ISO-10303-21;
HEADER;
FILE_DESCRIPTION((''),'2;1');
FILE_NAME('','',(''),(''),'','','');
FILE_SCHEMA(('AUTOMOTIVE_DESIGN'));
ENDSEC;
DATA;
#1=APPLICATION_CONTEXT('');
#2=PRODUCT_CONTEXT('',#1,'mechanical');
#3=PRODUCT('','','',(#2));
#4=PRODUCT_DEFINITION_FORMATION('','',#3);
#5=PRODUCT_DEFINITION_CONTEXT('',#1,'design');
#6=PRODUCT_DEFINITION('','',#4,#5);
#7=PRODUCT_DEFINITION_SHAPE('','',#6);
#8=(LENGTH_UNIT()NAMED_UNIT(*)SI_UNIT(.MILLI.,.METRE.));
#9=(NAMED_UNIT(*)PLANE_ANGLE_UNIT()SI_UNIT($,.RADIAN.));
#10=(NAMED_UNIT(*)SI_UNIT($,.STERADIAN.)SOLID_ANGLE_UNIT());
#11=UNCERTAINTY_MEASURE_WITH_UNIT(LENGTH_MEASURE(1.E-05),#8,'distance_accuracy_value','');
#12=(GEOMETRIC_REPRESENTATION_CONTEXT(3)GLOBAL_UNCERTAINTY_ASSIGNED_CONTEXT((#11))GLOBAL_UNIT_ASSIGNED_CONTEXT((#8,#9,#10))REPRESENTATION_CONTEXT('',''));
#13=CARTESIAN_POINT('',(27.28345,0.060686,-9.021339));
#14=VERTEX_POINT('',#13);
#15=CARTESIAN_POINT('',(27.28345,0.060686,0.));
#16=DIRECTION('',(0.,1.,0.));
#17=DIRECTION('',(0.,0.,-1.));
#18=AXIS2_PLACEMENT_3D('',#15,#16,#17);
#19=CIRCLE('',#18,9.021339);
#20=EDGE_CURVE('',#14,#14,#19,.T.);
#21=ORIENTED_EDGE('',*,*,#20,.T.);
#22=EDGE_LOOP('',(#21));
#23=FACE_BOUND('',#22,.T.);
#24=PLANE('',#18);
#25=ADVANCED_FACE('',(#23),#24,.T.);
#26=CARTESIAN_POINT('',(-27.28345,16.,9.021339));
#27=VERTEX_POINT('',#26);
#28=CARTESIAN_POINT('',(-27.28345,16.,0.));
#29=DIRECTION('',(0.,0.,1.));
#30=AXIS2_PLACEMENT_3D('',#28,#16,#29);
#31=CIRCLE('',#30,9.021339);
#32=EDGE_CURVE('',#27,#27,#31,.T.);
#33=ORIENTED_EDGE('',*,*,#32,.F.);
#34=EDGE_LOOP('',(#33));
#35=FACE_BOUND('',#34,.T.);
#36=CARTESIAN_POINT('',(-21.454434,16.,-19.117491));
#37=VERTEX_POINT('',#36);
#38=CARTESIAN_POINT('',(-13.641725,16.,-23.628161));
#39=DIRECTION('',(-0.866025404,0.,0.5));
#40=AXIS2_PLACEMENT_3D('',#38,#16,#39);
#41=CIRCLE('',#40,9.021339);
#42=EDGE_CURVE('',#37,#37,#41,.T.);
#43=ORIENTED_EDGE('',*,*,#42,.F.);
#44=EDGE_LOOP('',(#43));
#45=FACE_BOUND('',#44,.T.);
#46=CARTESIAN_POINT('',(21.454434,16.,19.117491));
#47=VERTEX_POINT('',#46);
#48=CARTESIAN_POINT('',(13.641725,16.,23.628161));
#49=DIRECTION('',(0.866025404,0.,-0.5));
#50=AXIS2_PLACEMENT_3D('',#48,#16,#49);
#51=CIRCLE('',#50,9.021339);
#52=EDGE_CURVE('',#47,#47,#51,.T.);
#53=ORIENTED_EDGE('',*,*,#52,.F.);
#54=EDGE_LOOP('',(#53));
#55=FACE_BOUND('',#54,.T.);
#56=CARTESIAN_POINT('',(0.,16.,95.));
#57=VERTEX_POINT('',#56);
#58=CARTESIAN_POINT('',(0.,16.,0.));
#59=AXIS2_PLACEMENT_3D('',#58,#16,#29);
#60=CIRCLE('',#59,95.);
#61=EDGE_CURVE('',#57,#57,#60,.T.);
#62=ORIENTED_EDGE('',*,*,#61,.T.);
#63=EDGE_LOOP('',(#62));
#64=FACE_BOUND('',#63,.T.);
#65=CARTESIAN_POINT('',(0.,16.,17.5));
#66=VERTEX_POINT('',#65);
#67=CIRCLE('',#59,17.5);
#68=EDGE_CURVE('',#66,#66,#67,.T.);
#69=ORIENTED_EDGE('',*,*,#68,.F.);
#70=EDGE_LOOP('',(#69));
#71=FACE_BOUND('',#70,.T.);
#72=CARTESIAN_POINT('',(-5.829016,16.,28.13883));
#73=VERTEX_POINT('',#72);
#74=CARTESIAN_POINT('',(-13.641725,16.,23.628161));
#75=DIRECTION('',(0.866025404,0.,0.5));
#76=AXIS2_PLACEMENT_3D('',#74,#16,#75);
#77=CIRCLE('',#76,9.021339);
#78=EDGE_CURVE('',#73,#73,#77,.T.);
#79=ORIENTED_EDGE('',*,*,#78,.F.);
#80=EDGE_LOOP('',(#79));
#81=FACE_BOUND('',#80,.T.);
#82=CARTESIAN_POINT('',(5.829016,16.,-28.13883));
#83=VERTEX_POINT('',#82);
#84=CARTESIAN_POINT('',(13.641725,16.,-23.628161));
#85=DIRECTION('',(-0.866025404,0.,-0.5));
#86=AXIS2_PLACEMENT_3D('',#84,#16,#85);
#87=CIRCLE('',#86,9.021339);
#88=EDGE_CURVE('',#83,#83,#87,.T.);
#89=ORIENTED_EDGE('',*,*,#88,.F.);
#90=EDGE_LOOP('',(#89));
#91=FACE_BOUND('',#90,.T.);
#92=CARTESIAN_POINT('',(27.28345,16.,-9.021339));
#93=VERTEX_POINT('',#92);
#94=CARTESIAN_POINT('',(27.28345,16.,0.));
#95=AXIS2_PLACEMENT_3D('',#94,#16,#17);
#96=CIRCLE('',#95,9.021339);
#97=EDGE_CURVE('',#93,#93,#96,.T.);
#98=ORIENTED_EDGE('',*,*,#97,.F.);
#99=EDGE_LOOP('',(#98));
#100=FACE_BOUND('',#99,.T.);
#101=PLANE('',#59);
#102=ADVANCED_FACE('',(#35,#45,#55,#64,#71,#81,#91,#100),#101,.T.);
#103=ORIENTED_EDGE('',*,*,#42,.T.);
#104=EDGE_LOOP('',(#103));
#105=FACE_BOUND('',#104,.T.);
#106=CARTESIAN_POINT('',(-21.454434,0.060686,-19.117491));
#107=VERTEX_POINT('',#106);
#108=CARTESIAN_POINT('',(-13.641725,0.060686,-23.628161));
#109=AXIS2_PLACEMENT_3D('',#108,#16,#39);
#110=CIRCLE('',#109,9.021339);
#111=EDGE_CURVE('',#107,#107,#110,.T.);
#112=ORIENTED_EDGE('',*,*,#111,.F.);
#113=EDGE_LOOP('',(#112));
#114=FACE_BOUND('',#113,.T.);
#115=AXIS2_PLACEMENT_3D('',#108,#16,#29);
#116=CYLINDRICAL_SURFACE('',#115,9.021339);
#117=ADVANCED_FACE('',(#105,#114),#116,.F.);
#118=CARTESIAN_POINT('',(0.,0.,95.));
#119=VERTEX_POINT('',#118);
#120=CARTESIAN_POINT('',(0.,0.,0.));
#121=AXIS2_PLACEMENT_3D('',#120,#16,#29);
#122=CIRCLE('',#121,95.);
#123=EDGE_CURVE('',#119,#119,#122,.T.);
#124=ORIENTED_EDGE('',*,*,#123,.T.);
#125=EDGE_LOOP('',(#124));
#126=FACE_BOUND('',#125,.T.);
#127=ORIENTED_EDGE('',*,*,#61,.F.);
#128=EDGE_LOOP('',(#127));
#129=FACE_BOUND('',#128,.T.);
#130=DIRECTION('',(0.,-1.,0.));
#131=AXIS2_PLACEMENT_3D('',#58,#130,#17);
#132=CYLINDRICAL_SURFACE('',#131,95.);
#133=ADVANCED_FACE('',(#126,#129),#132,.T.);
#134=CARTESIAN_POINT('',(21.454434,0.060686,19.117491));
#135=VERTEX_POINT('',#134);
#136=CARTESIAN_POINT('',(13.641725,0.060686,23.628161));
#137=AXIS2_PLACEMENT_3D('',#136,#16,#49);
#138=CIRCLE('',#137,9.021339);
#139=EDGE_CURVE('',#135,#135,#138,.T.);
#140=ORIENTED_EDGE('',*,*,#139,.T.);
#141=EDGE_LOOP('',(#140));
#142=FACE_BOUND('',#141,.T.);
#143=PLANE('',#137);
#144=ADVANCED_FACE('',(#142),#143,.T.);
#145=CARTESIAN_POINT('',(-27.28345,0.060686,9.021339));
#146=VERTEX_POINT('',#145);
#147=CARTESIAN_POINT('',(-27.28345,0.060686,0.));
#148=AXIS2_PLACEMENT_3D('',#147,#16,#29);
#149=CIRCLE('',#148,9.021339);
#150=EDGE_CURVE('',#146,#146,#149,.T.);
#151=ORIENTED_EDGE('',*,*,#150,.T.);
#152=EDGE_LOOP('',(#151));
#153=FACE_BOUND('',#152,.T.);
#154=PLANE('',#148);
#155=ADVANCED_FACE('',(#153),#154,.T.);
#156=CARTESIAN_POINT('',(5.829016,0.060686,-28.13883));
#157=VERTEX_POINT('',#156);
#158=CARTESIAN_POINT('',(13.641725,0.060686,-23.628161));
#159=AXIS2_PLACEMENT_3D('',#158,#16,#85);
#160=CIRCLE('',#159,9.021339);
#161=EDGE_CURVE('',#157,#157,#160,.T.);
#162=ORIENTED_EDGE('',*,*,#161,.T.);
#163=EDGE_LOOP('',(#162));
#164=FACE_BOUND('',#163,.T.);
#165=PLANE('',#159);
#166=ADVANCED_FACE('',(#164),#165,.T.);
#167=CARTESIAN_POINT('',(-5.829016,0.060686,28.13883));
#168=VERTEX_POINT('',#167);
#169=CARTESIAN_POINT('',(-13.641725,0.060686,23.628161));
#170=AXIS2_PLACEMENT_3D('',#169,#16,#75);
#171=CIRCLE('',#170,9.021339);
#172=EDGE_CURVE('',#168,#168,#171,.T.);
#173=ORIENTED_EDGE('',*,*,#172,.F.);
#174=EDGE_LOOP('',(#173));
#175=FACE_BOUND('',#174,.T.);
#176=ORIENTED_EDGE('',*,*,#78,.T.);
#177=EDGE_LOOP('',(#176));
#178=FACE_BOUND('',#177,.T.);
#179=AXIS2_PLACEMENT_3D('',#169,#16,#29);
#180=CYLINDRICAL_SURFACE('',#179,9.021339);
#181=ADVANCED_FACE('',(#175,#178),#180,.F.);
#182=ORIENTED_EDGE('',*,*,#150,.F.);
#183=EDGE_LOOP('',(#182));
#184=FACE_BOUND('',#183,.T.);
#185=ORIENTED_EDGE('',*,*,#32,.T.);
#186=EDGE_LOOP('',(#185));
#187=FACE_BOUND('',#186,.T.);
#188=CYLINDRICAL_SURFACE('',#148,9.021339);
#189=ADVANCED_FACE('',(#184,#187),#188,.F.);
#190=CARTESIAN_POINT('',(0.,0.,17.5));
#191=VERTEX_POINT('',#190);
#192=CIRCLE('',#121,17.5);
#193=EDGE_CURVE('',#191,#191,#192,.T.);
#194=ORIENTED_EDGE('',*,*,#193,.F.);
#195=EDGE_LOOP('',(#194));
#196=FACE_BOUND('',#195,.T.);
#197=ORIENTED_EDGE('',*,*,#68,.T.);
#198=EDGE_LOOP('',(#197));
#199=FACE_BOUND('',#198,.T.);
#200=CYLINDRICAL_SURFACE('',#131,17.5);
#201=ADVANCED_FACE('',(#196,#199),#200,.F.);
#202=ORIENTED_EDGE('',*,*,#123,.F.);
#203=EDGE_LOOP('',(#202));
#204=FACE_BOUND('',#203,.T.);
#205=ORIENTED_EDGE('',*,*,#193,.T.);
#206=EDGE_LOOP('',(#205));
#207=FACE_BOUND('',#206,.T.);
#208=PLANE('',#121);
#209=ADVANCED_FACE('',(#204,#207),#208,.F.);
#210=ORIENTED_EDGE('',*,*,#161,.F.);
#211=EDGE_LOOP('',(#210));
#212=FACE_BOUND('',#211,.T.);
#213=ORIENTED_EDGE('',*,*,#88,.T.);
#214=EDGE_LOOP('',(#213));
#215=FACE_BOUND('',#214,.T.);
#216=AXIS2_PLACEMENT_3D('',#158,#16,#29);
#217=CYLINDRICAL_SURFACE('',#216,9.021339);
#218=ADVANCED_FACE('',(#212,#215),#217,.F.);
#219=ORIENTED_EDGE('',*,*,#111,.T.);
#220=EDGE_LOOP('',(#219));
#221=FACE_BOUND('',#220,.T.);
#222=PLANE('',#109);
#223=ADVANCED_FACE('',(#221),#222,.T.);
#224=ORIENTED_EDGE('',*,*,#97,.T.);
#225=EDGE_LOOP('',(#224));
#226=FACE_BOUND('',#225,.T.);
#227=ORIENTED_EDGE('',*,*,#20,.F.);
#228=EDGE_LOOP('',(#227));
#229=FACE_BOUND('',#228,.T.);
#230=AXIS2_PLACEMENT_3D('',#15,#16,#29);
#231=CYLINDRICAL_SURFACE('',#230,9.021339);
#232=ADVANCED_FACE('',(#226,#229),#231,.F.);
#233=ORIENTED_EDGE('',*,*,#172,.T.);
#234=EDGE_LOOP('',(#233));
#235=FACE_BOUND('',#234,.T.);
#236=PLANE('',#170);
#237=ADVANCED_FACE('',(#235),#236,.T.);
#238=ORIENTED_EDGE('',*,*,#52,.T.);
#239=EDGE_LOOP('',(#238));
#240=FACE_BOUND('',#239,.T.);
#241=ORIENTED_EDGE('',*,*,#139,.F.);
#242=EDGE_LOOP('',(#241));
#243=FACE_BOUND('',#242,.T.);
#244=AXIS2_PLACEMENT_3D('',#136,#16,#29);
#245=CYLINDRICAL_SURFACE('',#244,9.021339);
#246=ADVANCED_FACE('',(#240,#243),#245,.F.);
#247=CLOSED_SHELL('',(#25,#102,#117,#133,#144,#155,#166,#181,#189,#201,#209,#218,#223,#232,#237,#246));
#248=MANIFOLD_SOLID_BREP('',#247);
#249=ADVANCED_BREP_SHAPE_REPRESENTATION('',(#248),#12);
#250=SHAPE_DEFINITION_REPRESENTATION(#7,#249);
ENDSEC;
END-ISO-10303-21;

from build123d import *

# Parameters (mm, degrees)
SKETCH1_R           = 95
BOSS_EXTRUDE1_DEPTH = 16
SKETCH2_R           = 17.5
CUT_EXTRUDE1_DEPTH  = 136.299667405
SKETCH3_R           = 9.02133893
CUT_EXTRUDE2_DEPTH  = 15.939313642
CIRPATTERN1_COUNT   = 6


with BuildPart() as part:
    # Sketch1 → Boss-Extrude1 (new body)
    with BuildSketch(Plane(origin=(0, 0, 0), x_dir=(1, 0, 0), z_dir=(0, 1, 0))):
        Circle(SKETCH1_R)
    extrude(amount=BOSS_EXTRUDE1_DEPTH)

    # Sketch2 → Cut-Extrude1 (cut, through all)
    with BuildSketch(Plane(origin=(0, 0, 0), x_dir=(1, 0, 0), z_dir=(0, 1, 0))):
        Circle(SKETCH2_R)
    extrude(amount=CUT_EXTRUDE1_DEPTH, mode=Mode.SUBTRACT)

    # Sketch3 → Cut-Extrude2 (cut)
    with BuildSketch(Plane(origin=(0, 16, 0), x_dir=(1, 0, 0), z_dir=(0, 1, 0))):
        with Locations((-27.28345013, 0)):
            Circle(SKETCH3_R)
    cut_extrude2 = extrude(amount=-CUT_EXTRUDE2_DEPTH, mode=Mode.SUBTRACT)

    # CirPattern1: Cut-Extrude2 ×6 about axis
    cirpattern1_axis = Axis((0, 0, 0), (0, 1, 0))
    for i in range(1, CIRPATTERN1_COUNT):
        add(cut_extrude2.rotate(cirpattern1_axis, i * 360 / CIRPATTERN1_COUNT), mode=Mode.SUBTRACT)


solid = part.part
